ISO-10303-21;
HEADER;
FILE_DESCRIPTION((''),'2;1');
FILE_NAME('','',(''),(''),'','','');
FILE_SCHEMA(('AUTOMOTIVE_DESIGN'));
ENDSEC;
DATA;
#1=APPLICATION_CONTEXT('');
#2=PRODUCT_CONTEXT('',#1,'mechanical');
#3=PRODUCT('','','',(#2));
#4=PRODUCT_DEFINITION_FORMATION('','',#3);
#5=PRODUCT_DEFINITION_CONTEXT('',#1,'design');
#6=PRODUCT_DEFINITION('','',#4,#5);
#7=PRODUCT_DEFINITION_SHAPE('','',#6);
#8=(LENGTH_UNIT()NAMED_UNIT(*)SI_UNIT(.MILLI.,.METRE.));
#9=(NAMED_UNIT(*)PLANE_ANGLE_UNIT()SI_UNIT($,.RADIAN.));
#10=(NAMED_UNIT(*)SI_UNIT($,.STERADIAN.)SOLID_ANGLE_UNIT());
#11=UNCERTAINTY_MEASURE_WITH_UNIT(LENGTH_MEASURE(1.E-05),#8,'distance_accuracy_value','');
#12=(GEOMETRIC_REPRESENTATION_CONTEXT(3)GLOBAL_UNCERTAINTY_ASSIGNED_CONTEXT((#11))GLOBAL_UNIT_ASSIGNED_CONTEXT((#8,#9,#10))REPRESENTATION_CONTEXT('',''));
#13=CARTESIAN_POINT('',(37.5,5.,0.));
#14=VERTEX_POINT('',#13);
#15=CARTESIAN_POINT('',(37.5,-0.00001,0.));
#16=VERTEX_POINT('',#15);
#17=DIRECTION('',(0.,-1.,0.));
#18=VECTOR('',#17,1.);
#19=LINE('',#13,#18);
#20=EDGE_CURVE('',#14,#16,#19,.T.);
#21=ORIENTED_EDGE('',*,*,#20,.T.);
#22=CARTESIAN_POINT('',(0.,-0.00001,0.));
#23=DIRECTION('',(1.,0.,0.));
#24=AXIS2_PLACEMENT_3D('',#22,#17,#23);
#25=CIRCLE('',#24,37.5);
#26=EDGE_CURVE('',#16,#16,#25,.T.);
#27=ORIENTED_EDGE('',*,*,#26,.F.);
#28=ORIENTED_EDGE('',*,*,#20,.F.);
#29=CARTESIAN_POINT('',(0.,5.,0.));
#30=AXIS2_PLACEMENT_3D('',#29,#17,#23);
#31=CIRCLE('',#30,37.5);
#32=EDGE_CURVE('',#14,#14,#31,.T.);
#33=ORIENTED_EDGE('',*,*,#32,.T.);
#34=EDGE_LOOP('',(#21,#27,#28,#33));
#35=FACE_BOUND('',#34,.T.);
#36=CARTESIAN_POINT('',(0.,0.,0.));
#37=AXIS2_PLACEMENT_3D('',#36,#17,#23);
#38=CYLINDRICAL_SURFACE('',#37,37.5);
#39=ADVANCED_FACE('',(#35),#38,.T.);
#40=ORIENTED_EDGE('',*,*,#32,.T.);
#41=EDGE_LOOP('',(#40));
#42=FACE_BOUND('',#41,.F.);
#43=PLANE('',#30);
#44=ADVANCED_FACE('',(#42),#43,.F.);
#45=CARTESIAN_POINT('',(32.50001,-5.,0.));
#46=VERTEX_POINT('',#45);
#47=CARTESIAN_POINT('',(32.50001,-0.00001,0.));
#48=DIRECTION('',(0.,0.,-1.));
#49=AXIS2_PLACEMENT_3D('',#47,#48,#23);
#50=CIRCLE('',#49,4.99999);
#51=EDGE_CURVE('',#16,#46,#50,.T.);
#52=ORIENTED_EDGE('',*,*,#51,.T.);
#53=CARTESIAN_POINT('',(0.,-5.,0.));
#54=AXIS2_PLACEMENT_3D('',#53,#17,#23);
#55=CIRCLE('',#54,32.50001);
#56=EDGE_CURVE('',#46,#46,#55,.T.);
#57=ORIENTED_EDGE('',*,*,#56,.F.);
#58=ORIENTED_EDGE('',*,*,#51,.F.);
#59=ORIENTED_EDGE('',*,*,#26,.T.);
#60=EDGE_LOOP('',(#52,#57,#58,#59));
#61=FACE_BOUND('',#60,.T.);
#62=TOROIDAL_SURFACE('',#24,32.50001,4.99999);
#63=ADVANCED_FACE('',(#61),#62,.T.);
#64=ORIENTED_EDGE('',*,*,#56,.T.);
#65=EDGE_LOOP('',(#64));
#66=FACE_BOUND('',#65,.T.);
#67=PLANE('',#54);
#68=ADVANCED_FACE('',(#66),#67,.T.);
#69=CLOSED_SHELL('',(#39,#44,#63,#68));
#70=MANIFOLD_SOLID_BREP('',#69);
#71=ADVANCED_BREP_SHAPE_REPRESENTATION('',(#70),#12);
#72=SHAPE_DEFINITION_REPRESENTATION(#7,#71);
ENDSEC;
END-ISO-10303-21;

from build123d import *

# Parameters (mm, degrees)
F0_R          = 37.5
F1_DEPTH      = 5
F1_DEPTH_BACK = 5
F2_R          = 4.99999


# Not quite as in the source:
# - a fillet or chamfer is up to 0.001 mm smaller than in the source, because OpenCascade refuses the exact size


with BuildPart() as f1:
    # F0 (on Front) → F1 (new body, two sides)
    with BuildSketch(Plane.XZ) as f1_sk:
        Circle(F0_R)
    extrude(amount=F1_DEPTH)
    extrude(f1_sk.sketch, amount=-F1_DEPTH_BACK)

    # F2 (radius 5 in the source; OpenCascade refuses exactly that, so slightly less here)
    f2_edges = [f1.edges().sort_by_distance(p)[0] for p in [
        (-37.5, -5, 0),
    ]]
    fillet(f2_edges, radius=F2_R)


solid = f1.part
